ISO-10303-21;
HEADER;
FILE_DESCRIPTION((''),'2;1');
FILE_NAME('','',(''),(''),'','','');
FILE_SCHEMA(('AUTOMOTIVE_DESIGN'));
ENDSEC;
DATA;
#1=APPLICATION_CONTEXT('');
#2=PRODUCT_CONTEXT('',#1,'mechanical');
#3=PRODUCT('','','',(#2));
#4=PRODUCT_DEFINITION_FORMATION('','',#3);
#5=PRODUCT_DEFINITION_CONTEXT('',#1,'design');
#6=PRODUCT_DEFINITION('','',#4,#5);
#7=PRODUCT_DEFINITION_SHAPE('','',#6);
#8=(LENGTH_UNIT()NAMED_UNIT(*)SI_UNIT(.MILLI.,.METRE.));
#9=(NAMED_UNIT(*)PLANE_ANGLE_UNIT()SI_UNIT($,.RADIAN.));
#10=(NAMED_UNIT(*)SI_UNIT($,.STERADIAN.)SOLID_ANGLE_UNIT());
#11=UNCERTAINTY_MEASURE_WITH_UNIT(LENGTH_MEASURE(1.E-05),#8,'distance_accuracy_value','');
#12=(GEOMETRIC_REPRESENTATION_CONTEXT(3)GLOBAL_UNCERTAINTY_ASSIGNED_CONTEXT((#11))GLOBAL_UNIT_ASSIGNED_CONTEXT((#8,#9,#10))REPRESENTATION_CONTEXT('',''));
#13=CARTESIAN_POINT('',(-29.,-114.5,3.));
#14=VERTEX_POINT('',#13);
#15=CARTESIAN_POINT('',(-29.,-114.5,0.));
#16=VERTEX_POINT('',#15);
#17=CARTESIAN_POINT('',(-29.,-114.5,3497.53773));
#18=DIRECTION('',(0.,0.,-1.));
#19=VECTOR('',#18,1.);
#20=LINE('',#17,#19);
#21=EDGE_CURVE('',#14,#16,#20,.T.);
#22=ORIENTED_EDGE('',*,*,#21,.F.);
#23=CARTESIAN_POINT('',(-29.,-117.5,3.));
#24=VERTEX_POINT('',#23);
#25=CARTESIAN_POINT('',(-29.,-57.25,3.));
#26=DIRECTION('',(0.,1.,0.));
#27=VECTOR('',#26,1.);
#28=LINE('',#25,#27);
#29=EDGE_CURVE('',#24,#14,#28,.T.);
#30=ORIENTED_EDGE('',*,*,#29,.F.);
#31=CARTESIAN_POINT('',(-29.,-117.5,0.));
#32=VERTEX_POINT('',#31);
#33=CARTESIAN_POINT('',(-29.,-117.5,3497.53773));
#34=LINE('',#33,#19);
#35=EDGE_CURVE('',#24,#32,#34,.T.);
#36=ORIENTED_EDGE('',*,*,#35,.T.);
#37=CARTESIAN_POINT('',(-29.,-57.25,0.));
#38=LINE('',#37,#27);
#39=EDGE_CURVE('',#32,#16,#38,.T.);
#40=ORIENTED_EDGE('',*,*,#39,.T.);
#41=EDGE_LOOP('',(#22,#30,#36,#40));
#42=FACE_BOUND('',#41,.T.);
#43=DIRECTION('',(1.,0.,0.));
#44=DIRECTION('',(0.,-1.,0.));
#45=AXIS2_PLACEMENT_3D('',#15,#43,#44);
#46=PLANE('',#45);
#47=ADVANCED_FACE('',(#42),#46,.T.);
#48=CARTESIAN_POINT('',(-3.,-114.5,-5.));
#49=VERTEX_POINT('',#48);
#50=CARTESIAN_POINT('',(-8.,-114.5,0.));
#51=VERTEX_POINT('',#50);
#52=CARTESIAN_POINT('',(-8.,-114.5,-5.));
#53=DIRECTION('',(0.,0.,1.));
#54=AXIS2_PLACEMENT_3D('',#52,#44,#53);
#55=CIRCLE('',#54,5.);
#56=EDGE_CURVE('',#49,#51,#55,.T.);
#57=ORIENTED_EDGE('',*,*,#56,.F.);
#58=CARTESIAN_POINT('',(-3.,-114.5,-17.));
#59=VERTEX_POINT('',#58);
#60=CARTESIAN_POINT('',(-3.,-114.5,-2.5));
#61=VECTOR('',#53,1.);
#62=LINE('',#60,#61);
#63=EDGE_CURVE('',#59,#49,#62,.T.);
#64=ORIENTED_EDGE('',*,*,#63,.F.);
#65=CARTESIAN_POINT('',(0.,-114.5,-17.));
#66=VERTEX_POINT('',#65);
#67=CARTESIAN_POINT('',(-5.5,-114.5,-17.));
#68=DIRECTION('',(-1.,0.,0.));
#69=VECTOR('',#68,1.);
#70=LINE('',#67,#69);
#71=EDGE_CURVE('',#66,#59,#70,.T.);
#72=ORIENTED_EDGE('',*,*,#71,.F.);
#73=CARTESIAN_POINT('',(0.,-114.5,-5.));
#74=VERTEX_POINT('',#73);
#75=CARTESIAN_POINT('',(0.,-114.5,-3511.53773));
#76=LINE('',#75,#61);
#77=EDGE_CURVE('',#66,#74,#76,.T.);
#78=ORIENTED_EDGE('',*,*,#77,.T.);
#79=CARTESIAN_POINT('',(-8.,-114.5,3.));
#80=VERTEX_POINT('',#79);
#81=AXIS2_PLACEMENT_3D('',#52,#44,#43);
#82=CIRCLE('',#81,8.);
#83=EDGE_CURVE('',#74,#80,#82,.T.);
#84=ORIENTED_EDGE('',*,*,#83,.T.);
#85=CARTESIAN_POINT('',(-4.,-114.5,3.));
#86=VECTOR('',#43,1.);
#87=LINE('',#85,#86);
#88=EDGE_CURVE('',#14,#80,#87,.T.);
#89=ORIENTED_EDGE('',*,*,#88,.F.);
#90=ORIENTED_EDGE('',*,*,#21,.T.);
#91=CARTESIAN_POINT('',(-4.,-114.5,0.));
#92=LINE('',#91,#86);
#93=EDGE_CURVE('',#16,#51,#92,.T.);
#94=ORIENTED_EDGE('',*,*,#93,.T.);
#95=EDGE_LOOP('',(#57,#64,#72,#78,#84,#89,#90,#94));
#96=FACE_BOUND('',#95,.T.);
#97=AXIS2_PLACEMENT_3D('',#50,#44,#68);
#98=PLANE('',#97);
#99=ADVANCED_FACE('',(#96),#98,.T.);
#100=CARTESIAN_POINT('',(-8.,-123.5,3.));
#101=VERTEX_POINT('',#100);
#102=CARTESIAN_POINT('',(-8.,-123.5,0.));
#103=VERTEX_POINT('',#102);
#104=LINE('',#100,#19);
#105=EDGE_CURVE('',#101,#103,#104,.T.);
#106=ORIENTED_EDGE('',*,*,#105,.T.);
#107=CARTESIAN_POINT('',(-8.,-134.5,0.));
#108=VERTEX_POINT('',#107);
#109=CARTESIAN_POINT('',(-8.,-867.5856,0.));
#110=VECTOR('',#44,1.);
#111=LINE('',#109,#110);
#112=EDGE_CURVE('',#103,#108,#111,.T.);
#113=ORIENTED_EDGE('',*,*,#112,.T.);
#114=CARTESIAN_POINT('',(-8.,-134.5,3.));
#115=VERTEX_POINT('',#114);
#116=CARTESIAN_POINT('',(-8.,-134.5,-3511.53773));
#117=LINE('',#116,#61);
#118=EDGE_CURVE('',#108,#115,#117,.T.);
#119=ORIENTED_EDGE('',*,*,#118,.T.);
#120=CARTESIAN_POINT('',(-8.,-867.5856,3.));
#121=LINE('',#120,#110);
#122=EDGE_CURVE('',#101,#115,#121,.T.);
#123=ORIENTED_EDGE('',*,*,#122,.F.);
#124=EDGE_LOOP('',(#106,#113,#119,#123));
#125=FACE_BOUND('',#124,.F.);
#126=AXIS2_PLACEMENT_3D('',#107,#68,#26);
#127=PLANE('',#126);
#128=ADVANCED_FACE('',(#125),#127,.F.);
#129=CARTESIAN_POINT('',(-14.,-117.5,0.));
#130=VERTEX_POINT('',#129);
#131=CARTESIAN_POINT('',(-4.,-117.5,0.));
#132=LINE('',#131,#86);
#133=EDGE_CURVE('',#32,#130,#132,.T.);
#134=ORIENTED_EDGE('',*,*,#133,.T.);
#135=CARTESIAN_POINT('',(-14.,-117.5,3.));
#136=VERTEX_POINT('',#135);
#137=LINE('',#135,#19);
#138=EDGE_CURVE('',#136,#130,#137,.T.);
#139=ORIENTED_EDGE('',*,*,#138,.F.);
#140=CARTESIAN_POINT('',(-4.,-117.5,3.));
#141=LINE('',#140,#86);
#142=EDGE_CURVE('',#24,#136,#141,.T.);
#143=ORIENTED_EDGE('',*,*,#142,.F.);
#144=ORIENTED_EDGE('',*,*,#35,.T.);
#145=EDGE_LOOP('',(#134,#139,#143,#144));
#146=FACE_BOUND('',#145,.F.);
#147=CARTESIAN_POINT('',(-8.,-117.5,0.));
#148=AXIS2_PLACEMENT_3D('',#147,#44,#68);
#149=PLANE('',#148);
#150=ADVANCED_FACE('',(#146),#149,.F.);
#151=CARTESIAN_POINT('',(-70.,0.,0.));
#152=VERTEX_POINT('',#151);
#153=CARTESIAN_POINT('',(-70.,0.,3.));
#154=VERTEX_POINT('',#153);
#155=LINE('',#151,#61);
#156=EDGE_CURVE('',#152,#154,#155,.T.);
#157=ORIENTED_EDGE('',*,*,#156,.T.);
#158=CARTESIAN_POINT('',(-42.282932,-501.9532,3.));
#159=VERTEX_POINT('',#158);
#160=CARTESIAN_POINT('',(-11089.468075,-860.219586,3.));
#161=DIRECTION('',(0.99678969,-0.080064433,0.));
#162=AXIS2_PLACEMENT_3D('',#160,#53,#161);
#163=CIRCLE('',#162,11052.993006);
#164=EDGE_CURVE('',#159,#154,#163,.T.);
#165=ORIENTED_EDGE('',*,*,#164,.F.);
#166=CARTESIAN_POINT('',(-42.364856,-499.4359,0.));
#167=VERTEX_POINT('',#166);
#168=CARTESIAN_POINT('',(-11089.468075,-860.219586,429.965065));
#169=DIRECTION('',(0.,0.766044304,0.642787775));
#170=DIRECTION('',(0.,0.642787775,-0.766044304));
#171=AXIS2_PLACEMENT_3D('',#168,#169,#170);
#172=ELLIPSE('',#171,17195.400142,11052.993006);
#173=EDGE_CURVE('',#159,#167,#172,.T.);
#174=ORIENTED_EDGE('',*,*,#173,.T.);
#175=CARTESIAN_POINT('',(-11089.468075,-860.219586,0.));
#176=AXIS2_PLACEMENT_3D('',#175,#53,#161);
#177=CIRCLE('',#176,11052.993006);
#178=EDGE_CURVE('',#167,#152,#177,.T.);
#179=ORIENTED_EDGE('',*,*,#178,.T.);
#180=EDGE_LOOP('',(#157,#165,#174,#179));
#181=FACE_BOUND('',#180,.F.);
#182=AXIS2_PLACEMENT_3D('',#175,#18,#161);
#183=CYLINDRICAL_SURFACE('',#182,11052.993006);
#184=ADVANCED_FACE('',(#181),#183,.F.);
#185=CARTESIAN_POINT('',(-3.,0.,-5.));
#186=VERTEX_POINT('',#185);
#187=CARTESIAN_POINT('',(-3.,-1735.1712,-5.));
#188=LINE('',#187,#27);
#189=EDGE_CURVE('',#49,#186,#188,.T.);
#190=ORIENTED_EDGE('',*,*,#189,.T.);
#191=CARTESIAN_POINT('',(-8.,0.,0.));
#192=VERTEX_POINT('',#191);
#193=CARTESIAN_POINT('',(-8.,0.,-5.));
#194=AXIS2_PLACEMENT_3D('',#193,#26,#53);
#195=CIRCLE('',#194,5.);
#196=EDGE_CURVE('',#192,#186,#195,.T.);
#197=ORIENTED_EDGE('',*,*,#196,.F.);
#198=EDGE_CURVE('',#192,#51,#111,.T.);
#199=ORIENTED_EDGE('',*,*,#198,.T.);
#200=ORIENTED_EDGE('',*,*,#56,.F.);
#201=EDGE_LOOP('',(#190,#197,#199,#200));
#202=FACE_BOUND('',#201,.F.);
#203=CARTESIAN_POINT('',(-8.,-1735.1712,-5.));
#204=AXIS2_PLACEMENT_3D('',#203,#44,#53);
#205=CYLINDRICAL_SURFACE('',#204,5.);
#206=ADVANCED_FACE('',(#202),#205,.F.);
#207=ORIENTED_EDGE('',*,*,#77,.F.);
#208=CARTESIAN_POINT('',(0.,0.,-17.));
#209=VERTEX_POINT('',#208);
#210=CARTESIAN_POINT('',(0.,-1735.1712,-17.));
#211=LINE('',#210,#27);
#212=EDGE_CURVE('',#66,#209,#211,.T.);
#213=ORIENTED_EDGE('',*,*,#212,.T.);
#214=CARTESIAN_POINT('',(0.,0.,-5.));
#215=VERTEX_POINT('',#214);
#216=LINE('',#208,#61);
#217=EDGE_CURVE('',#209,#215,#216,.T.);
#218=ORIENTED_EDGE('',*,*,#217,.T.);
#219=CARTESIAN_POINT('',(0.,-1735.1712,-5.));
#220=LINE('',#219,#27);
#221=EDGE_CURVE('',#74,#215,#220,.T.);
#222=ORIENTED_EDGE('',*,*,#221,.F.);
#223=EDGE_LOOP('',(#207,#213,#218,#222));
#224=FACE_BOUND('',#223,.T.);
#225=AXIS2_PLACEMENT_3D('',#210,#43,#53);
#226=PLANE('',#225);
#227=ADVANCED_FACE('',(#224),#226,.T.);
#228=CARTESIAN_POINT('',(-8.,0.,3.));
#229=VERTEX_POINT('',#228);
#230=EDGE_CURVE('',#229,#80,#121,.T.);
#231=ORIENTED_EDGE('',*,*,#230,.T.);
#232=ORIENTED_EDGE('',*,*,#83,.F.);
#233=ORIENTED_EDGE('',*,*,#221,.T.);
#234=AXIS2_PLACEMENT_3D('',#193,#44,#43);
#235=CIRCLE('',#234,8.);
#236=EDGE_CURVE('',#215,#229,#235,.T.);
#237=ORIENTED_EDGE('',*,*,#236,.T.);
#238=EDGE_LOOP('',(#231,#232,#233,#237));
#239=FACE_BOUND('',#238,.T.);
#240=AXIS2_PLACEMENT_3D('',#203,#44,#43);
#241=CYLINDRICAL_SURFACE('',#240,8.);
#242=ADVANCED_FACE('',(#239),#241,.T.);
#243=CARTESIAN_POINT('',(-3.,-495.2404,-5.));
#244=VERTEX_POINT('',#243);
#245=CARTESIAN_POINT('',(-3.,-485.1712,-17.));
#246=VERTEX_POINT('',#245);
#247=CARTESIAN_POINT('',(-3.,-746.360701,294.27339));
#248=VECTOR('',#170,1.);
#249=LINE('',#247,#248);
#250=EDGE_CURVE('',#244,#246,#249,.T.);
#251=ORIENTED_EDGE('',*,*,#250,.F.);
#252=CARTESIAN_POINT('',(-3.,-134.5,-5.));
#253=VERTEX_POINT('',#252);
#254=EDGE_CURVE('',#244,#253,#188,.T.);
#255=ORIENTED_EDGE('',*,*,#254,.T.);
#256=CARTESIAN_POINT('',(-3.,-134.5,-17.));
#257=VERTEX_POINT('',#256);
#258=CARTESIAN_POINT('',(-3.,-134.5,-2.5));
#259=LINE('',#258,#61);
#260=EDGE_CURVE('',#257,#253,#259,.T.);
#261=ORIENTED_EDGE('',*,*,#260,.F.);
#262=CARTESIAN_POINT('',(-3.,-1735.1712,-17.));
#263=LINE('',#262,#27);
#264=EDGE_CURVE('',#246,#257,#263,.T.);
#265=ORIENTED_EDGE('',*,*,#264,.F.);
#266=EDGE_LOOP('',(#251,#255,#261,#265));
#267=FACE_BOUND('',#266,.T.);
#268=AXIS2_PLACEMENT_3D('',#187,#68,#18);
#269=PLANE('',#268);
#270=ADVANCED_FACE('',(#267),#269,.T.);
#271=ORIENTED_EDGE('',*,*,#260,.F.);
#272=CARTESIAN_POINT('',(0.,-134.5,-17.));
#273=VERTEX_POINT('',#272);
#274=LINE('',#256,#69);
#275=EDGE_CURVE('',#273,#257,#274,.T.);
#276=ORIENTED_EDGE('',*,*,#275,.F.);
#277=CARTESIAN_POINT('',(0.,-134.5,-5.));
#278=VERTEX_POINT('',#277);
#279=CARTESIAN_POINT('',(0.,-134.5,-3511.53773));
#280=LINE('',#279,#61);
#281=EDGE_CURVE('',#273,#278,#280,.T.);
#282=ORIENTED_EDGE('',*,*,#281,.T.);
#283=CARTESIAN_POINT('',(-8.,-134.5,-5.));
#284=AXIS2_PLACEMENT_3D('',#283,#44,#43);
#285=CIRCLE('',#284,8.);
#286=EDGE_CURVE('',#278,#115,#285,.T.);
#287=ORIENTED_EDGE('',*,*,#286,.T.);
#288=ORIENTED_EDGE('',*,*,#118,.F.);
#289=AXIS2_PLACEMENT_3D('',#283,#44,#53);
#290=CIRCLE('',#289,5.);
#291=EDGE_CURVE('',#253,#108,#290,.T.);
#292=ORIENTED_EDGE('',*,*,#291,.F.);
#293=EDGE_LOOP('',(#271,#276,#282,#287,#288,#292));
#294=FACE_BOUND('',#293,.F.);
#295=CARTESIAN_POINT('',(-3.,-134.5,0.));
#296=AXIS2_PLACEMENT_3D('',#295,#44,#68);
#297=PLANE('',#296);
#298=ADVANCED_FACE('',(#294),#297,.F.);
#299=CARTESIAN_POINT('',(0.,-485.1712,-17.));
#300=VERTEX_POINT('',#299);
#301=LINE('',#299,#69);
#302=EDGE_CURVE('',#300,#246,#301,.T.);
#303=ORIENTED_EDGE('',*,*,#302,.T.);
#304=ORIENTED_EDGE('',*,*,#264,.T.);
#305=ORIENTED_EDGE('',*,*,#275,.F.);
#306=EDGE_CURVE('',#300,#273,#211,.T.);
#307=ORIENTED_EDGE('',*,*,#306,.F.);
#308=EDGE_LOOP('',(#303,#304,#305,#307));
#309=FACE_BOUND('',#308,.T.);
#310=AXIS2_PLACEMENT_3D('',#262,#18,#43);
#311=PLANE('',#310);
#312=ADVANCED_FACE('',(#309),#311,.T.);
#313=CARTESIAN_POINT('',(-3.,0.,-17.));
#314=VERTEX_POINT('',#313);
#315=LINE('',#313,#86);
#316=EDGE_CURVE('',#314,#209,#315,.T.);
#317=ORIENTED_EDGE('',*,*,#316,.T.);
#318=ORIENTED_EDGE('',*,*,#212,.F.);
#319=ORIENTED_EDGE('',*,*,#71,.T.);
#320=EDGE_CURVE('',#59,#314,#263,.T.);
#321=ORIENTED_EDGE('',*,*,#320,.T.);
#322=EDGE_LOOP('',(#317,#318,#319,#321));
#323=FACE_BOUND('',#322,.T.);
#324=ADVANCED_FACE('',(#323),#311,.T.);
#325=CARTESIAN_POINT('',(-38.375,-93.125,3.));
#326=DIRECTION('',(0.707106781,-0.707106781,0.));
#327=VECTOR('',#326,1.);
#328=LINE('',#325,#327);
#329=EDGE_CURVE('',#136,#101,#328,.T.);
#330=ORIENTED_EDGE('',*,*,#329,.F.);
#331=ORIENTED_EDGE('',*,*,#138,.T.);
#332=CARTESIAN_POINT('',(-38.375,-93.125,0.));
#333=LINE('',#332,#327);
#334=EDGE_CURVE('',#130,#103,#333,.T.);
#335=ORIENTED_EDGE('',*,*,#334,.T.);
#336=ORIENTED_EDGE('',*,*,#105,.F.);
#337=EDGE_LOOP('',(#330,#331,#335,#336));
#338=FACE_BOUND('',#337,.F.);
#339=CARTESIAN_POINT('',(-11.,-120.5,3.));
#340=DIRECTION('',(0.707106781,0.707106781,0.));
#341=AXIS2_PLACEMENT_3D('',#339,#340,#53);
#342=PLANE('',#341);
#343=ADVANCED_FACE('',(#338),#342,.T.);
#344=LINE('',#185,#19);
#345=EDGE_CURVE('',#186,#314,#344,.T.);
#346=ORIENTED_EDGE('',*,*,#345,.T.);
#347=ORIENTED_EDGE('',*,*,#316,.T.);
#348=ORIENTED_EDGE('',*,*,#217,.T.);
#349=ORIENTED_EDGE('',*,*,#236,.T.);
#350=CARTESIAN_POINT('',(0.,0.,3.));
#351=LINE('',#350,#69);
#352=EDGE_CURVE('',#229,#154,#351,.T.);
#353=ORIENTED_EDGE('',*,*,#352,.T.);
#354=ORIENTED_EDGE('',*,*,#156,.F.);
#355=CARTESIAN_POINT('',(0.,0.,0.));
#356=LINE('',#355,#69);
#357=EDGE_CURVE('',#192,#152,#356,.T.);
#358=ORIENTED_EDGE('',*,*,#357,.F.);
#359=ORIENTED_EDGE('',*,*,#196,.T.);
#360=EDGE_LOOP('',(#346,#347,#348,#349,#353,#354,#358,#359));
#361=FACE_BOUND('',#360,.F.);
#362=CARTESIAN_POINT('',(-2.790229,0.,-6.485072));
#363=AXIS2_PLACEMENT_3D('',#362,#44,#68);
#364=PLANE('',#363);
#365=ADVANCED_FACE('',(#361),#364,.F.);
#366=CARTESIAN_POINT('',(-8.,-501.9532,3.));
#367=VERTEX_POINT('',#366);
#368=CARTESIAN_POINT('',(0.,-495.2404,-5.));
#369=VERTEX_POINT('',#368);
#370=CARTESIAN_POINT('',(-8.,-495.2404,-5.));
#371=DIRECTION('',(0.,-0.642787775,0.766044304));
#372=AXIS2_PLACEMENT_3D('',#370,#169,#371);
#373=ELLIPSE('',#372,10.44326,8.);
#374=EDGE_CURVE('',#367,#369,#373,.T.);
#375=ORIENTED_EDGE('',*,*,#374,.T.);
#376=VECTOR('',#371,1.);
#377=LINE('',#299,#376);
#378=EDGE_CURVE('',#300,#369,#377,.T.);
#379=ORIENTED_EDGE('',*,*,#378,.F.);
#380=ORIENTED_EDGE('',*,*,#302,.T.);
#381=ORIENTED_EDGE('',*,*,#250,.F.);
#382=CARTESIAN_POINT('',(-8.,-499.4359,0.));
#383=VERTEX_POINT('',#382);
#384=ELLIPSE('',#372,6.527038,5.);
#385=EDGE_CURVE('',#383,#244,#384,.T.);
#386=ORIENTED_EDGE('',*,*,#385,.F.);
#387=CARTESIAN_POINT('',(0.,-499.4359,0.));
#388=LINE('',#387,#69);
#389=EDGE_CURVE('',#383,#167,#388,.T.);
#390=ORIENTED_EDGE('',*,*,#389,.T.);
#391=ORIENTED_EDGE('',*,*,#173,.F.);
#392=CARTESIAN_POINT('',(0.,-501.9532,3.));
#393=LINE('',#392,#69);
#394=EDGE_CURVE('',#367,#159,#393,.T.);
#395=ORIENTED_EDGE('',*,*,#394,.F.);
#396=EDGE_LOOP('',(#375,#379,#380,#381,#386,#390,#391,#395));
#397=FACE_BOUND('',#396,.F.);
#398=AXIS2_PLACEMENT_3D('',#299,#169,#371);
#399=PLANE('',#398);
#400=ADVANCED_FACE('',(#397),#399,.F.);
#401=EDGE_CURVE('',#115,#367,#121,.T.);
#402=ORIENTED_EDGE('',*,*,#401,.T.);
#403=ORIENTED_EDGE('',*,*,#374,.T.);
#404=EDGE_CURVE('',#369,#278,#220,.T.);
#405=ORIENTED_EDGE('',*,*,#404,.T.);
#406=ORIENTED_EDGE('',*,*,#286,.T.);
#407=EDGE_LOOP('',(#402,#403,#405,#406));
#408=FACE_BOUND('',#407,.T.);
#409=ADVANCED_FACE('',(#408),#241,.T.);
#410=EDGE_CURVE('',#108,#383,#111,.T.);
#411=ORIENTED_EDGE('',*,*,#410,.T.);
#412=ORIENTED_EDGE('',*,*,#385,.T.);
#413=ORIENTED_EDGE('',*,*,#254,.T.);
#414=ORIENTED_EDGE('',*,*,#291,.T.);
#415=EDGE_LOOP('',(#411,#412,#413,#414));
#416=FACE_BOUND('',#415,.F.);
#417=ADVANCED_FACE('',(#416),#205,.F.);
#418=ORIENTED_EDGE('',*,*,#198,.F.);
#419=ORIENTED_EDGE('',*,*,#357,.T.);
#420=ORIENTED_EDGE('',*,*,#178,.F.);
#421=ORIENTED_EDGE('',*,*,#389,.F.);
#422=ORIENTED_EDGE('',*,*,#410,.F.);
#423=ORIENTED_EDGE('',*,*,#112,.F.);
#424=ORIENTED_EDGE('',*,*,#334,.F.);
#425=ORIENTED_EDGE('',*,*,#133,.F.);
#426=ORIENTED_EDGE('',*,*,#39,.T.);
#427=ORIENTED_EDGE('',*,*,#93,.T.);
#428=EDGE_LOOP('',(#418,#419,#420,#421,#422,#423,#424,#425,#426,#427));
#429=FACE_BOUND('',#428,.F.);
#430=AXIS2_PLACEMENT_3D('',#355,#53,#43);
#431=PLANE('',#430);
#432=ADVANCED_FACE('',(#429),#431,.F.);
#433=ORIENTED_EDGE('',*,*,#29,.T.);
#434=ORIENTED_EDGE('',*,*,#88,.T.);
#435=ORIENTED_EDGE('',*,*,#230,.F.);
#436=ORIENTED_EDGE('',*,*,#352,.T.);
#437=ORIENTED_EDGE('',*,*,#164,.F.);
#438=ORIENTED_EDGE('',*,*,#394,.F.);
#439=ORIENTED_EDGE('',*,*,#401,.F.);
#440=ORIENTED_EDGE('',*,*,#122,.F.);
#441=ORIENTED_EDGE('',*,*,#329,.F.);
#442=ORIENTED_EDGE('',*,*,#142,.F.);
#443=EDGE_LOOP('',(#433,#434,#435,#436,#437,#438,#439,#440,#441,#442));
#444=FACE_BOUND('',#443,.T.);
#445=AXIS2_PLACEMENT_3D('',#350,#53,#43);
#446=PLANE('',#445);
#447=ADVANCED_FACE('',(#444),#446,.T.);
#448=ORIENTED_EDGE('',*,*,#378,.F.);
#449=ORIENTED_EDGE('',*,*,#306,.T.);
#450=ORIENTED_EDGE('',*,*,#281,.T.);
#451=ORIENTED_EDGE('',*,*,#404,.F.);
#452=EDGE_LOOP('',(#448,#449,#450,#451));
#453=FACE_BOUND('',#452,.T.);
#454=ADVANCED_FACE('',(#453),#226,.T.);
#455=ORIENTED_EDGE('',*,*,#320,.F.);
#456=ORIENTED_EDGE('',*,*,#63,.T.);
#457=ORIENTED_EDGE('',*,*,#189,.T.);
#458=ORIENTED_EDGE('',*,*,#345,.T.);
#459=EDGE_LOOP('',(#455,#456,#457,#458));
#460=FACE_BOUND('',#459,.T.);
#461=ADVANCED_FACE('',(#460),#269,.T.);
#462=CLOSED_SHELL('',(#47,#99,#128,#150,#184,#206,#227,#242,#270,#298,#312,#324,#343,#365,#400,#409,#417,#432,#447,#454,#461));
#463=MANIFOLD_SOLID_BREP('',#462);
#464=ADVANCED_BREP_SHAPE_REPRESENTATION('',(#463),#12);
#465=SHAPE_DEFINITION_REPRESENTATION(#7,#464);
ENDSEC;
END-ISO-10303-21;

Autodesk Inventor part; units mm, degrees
ref_plane "YZ Plane" through (0, 0, 0) normal (1, 0, 0) x (0, 1, 0)
ref_plane "XZ Plane" through (0, 0, 0) normal (0, 1, 0) x (-1, 0, 0)
ref_plane "XY Plane" through (0, 0, 0) normal (0, 0, 1) x (1, 0, 0)
sketch "Sketch1" plane through (0, 0, 0) normal (0, 0, 1) x (1, 0, 0)
  arc A0 (-71.9586, -1745.1712) -> (-70, 0) centre (-11089.4751, -860.2193) ccw
  line L0 (0, 0) -> (-70, 0)
  line L1 (0, -117.9106) -> (-61.4296, -117.9106) construction
  line L2 (0, -617.9106) -> (-39.1314, -617.9106) construction
  line L3 (0, -1117.9106) -> (-39.4794, -1117.9106) construction
  line L4 (0, -1617.9106) -> (-62.4758, -1617.9106) construction
  line L5 (-71.9586, -1745.1712) -> (0, -1745.1712)
  line L6 (0, 0) -> (0, -1745.1712)
  line L7 (0, -1735.1712) -> (-10.3553, -1745.1712)
  point P0 (-20, 0)
  dimension "d33" = 50
  dimension "d58" = 500
  dimension "d59" = 500
  dimension "d60" = 500
  dimension "d141" = 1745.171
  dimension "d148" = 70
  dimension "d149" = 11053
  dimension "d150" = 71.959
  dimension "d151" = 136
  dimension "d153" = 10
extrude "Plate3" add sketch "Sketch1" along normal blind 3 contours A0 L0 L6 L7 L5
sketch "Sketch3" plane through (-3, 0, 3) normal (1, 0, 0) x (0, 1, 0)
  line L0 (-1735.1712, 0) -> (0, 0)
  line L1 (0, 0) -> (0, 20)
  line L2 (0, 20) -> (-1735.1712, 20)
  line L3 (-1735.1712, 20) -> (-1735.1712, 0)
edge flange "Flange2" height 20 angle 90 thickness 3 bend radius 5 thickness toward (1, 0, 0) relief round relief width 3 relief depth 1.5 edges at (0, -867.5856, 3) wall of the first edge with corners at (-3, -1735.1712, 3) (-3, 0, 3) (-3, 0, -17) (-3, -1735.1712, -17)
bend "Bend2"
corner "Corner2"
sketch "Sketch5" plane through (0, 0, 0) normal (0, 0, 1) x (1, 0, 0)
  line L0 (-8, -1742.8967) -> (-8, 0) projected
  line L1 (-70, 0) -> (-8, 0) projected
  arc A0 (-71.9586, -1745.1712) -> (-70, 0) centre (-11089.4751, -860.2193) ccw projected
  line L2 (0, 0) -> (0, -1735.1712) projected
  line L3 (0, -114.5) -> (-29, -114.5)
  line L4 (0, -117.5) -> (-3, -117.5) construction
  line L5 (-3, -1735.1712) -> (-3, 0) projected
  line L6 (-29, -114.5) -> (-29, -117.5)
  line L7 (0, -614.5) -> (-39.2067, -614.5) construction
  line L8 (0, -1114.5) -> (-39.4004, -1114.5) construction
  line L9 (0, -1614.5) -> (-62.242, -1614.5) construction
  line L10 (-10.3553, -1745.1712) -> (-71.9586, -1745.1712) projected
  line L11 (0, -114.5) -> (0, -134.5)
  line L12 (-3, -114.5) -> (-3, -117.5) construction
  line L13 (0, -134.5) -> (-3, -134.5)
  line L14 (-29, -114.5) -> (-61.6597, -114.5) construction
  line L15 (-29, -117.5) -> (-61.4573, -117.5) construction
  line L16 (-3, -117.5) -> (-3, -134.5)
  line L17 (-3, -117.5) -> (-29, -117.5)
  line L18 (-3, -134.5) -> (-8, -134.5)
  line L19 (-8, -1742.8967) -> (-10.3553, -1745.1712) projected
  point P0 (0, 0)
  point P1 (845.25, -380.4205)
  point P2 (848, -380.4205)
  point P3 (-29, -116)
  point P4 (850, -410.4205)
  point P5 (-3, -114.5)
  point P6 (-3, -134.5)
  point P7 (-8, -117.5)
  dimension "d69" = 1735.1712
  dimension "d70" = 3
  dimension "d76" = 61.6598
  dimension "d80" = 39.2067
  dimension "d102" = 62.242
  dimension "d104" = 39.4004
  dimension "d106" = 3
  dimension "d107" = 20
  dimension "d108" = 116
  dimension "d112" = 29
  dimension "d142" = 500
  dimension "d143" = 500
  dimension "d144" = 500
extrude "Extrusion2" cut sketch "Sketch5" along normal through all both and the other way through all contours L0 L17 L5 L18 | L17 L6 L3 L0 | L0 L3 L5 L17 | L5 L3 L2 L13
pattern_linear "Rectangular Pattern3" count 4 spacing 500 along (0, -1, 0) of "Extrusion2"
chamfer "Corner Chamfer1" distance 6 angle 45 3 edges at (-8, -1617.5, 1.5) (-8, -1117.5, 1.5) (-8, -117.5, 1.5)
sketch "Sketch7" plane through (0, -1614.5, -17) normal (1, 0, 0) x (0, 0, -1)
  line L0 (-17, -130.6712) -> (-20, -130.6712) projected
  line L1 (0, 1000) -> (0, 1480) projected
  line L2 (-20, -130.6712) -> (0, -130.6712)
  line L3 (0, -130.6712) -> (0, 1129.3288)
  line L4 (0, 1129.3288) -> (-20, 1129.3288)
  line L5 (-20, 1129.3288) -> (-20, -130.6712)
  line L6 (0, 1129.3288) -> (-20, 1112.5468)
  point P0 (-17, 1614.5)
  point P1 (0, 1000)
  dimension "d154" = 1260
  dimension "d157" = 40
extrude "Extrusion3" cut sketch "Sketch7" against normal through all contours L0 L5 L6 L1 L3 L2
equation "\"d33\" = d25"
equation "\"БОРТ_стрингер_3_высота\" = 62"
equation "\"БОРТ_стрингер_4_высота\" = 39"
equation "\"БОРТ_стрингер_5_высота\" = 39"
equation "\"БОРТ_стрингер_6_высота\" = 62"
equation "\"d25\" = 50"
properties part number "MSC 313 RIB HIP" material "Stainless Steel"
